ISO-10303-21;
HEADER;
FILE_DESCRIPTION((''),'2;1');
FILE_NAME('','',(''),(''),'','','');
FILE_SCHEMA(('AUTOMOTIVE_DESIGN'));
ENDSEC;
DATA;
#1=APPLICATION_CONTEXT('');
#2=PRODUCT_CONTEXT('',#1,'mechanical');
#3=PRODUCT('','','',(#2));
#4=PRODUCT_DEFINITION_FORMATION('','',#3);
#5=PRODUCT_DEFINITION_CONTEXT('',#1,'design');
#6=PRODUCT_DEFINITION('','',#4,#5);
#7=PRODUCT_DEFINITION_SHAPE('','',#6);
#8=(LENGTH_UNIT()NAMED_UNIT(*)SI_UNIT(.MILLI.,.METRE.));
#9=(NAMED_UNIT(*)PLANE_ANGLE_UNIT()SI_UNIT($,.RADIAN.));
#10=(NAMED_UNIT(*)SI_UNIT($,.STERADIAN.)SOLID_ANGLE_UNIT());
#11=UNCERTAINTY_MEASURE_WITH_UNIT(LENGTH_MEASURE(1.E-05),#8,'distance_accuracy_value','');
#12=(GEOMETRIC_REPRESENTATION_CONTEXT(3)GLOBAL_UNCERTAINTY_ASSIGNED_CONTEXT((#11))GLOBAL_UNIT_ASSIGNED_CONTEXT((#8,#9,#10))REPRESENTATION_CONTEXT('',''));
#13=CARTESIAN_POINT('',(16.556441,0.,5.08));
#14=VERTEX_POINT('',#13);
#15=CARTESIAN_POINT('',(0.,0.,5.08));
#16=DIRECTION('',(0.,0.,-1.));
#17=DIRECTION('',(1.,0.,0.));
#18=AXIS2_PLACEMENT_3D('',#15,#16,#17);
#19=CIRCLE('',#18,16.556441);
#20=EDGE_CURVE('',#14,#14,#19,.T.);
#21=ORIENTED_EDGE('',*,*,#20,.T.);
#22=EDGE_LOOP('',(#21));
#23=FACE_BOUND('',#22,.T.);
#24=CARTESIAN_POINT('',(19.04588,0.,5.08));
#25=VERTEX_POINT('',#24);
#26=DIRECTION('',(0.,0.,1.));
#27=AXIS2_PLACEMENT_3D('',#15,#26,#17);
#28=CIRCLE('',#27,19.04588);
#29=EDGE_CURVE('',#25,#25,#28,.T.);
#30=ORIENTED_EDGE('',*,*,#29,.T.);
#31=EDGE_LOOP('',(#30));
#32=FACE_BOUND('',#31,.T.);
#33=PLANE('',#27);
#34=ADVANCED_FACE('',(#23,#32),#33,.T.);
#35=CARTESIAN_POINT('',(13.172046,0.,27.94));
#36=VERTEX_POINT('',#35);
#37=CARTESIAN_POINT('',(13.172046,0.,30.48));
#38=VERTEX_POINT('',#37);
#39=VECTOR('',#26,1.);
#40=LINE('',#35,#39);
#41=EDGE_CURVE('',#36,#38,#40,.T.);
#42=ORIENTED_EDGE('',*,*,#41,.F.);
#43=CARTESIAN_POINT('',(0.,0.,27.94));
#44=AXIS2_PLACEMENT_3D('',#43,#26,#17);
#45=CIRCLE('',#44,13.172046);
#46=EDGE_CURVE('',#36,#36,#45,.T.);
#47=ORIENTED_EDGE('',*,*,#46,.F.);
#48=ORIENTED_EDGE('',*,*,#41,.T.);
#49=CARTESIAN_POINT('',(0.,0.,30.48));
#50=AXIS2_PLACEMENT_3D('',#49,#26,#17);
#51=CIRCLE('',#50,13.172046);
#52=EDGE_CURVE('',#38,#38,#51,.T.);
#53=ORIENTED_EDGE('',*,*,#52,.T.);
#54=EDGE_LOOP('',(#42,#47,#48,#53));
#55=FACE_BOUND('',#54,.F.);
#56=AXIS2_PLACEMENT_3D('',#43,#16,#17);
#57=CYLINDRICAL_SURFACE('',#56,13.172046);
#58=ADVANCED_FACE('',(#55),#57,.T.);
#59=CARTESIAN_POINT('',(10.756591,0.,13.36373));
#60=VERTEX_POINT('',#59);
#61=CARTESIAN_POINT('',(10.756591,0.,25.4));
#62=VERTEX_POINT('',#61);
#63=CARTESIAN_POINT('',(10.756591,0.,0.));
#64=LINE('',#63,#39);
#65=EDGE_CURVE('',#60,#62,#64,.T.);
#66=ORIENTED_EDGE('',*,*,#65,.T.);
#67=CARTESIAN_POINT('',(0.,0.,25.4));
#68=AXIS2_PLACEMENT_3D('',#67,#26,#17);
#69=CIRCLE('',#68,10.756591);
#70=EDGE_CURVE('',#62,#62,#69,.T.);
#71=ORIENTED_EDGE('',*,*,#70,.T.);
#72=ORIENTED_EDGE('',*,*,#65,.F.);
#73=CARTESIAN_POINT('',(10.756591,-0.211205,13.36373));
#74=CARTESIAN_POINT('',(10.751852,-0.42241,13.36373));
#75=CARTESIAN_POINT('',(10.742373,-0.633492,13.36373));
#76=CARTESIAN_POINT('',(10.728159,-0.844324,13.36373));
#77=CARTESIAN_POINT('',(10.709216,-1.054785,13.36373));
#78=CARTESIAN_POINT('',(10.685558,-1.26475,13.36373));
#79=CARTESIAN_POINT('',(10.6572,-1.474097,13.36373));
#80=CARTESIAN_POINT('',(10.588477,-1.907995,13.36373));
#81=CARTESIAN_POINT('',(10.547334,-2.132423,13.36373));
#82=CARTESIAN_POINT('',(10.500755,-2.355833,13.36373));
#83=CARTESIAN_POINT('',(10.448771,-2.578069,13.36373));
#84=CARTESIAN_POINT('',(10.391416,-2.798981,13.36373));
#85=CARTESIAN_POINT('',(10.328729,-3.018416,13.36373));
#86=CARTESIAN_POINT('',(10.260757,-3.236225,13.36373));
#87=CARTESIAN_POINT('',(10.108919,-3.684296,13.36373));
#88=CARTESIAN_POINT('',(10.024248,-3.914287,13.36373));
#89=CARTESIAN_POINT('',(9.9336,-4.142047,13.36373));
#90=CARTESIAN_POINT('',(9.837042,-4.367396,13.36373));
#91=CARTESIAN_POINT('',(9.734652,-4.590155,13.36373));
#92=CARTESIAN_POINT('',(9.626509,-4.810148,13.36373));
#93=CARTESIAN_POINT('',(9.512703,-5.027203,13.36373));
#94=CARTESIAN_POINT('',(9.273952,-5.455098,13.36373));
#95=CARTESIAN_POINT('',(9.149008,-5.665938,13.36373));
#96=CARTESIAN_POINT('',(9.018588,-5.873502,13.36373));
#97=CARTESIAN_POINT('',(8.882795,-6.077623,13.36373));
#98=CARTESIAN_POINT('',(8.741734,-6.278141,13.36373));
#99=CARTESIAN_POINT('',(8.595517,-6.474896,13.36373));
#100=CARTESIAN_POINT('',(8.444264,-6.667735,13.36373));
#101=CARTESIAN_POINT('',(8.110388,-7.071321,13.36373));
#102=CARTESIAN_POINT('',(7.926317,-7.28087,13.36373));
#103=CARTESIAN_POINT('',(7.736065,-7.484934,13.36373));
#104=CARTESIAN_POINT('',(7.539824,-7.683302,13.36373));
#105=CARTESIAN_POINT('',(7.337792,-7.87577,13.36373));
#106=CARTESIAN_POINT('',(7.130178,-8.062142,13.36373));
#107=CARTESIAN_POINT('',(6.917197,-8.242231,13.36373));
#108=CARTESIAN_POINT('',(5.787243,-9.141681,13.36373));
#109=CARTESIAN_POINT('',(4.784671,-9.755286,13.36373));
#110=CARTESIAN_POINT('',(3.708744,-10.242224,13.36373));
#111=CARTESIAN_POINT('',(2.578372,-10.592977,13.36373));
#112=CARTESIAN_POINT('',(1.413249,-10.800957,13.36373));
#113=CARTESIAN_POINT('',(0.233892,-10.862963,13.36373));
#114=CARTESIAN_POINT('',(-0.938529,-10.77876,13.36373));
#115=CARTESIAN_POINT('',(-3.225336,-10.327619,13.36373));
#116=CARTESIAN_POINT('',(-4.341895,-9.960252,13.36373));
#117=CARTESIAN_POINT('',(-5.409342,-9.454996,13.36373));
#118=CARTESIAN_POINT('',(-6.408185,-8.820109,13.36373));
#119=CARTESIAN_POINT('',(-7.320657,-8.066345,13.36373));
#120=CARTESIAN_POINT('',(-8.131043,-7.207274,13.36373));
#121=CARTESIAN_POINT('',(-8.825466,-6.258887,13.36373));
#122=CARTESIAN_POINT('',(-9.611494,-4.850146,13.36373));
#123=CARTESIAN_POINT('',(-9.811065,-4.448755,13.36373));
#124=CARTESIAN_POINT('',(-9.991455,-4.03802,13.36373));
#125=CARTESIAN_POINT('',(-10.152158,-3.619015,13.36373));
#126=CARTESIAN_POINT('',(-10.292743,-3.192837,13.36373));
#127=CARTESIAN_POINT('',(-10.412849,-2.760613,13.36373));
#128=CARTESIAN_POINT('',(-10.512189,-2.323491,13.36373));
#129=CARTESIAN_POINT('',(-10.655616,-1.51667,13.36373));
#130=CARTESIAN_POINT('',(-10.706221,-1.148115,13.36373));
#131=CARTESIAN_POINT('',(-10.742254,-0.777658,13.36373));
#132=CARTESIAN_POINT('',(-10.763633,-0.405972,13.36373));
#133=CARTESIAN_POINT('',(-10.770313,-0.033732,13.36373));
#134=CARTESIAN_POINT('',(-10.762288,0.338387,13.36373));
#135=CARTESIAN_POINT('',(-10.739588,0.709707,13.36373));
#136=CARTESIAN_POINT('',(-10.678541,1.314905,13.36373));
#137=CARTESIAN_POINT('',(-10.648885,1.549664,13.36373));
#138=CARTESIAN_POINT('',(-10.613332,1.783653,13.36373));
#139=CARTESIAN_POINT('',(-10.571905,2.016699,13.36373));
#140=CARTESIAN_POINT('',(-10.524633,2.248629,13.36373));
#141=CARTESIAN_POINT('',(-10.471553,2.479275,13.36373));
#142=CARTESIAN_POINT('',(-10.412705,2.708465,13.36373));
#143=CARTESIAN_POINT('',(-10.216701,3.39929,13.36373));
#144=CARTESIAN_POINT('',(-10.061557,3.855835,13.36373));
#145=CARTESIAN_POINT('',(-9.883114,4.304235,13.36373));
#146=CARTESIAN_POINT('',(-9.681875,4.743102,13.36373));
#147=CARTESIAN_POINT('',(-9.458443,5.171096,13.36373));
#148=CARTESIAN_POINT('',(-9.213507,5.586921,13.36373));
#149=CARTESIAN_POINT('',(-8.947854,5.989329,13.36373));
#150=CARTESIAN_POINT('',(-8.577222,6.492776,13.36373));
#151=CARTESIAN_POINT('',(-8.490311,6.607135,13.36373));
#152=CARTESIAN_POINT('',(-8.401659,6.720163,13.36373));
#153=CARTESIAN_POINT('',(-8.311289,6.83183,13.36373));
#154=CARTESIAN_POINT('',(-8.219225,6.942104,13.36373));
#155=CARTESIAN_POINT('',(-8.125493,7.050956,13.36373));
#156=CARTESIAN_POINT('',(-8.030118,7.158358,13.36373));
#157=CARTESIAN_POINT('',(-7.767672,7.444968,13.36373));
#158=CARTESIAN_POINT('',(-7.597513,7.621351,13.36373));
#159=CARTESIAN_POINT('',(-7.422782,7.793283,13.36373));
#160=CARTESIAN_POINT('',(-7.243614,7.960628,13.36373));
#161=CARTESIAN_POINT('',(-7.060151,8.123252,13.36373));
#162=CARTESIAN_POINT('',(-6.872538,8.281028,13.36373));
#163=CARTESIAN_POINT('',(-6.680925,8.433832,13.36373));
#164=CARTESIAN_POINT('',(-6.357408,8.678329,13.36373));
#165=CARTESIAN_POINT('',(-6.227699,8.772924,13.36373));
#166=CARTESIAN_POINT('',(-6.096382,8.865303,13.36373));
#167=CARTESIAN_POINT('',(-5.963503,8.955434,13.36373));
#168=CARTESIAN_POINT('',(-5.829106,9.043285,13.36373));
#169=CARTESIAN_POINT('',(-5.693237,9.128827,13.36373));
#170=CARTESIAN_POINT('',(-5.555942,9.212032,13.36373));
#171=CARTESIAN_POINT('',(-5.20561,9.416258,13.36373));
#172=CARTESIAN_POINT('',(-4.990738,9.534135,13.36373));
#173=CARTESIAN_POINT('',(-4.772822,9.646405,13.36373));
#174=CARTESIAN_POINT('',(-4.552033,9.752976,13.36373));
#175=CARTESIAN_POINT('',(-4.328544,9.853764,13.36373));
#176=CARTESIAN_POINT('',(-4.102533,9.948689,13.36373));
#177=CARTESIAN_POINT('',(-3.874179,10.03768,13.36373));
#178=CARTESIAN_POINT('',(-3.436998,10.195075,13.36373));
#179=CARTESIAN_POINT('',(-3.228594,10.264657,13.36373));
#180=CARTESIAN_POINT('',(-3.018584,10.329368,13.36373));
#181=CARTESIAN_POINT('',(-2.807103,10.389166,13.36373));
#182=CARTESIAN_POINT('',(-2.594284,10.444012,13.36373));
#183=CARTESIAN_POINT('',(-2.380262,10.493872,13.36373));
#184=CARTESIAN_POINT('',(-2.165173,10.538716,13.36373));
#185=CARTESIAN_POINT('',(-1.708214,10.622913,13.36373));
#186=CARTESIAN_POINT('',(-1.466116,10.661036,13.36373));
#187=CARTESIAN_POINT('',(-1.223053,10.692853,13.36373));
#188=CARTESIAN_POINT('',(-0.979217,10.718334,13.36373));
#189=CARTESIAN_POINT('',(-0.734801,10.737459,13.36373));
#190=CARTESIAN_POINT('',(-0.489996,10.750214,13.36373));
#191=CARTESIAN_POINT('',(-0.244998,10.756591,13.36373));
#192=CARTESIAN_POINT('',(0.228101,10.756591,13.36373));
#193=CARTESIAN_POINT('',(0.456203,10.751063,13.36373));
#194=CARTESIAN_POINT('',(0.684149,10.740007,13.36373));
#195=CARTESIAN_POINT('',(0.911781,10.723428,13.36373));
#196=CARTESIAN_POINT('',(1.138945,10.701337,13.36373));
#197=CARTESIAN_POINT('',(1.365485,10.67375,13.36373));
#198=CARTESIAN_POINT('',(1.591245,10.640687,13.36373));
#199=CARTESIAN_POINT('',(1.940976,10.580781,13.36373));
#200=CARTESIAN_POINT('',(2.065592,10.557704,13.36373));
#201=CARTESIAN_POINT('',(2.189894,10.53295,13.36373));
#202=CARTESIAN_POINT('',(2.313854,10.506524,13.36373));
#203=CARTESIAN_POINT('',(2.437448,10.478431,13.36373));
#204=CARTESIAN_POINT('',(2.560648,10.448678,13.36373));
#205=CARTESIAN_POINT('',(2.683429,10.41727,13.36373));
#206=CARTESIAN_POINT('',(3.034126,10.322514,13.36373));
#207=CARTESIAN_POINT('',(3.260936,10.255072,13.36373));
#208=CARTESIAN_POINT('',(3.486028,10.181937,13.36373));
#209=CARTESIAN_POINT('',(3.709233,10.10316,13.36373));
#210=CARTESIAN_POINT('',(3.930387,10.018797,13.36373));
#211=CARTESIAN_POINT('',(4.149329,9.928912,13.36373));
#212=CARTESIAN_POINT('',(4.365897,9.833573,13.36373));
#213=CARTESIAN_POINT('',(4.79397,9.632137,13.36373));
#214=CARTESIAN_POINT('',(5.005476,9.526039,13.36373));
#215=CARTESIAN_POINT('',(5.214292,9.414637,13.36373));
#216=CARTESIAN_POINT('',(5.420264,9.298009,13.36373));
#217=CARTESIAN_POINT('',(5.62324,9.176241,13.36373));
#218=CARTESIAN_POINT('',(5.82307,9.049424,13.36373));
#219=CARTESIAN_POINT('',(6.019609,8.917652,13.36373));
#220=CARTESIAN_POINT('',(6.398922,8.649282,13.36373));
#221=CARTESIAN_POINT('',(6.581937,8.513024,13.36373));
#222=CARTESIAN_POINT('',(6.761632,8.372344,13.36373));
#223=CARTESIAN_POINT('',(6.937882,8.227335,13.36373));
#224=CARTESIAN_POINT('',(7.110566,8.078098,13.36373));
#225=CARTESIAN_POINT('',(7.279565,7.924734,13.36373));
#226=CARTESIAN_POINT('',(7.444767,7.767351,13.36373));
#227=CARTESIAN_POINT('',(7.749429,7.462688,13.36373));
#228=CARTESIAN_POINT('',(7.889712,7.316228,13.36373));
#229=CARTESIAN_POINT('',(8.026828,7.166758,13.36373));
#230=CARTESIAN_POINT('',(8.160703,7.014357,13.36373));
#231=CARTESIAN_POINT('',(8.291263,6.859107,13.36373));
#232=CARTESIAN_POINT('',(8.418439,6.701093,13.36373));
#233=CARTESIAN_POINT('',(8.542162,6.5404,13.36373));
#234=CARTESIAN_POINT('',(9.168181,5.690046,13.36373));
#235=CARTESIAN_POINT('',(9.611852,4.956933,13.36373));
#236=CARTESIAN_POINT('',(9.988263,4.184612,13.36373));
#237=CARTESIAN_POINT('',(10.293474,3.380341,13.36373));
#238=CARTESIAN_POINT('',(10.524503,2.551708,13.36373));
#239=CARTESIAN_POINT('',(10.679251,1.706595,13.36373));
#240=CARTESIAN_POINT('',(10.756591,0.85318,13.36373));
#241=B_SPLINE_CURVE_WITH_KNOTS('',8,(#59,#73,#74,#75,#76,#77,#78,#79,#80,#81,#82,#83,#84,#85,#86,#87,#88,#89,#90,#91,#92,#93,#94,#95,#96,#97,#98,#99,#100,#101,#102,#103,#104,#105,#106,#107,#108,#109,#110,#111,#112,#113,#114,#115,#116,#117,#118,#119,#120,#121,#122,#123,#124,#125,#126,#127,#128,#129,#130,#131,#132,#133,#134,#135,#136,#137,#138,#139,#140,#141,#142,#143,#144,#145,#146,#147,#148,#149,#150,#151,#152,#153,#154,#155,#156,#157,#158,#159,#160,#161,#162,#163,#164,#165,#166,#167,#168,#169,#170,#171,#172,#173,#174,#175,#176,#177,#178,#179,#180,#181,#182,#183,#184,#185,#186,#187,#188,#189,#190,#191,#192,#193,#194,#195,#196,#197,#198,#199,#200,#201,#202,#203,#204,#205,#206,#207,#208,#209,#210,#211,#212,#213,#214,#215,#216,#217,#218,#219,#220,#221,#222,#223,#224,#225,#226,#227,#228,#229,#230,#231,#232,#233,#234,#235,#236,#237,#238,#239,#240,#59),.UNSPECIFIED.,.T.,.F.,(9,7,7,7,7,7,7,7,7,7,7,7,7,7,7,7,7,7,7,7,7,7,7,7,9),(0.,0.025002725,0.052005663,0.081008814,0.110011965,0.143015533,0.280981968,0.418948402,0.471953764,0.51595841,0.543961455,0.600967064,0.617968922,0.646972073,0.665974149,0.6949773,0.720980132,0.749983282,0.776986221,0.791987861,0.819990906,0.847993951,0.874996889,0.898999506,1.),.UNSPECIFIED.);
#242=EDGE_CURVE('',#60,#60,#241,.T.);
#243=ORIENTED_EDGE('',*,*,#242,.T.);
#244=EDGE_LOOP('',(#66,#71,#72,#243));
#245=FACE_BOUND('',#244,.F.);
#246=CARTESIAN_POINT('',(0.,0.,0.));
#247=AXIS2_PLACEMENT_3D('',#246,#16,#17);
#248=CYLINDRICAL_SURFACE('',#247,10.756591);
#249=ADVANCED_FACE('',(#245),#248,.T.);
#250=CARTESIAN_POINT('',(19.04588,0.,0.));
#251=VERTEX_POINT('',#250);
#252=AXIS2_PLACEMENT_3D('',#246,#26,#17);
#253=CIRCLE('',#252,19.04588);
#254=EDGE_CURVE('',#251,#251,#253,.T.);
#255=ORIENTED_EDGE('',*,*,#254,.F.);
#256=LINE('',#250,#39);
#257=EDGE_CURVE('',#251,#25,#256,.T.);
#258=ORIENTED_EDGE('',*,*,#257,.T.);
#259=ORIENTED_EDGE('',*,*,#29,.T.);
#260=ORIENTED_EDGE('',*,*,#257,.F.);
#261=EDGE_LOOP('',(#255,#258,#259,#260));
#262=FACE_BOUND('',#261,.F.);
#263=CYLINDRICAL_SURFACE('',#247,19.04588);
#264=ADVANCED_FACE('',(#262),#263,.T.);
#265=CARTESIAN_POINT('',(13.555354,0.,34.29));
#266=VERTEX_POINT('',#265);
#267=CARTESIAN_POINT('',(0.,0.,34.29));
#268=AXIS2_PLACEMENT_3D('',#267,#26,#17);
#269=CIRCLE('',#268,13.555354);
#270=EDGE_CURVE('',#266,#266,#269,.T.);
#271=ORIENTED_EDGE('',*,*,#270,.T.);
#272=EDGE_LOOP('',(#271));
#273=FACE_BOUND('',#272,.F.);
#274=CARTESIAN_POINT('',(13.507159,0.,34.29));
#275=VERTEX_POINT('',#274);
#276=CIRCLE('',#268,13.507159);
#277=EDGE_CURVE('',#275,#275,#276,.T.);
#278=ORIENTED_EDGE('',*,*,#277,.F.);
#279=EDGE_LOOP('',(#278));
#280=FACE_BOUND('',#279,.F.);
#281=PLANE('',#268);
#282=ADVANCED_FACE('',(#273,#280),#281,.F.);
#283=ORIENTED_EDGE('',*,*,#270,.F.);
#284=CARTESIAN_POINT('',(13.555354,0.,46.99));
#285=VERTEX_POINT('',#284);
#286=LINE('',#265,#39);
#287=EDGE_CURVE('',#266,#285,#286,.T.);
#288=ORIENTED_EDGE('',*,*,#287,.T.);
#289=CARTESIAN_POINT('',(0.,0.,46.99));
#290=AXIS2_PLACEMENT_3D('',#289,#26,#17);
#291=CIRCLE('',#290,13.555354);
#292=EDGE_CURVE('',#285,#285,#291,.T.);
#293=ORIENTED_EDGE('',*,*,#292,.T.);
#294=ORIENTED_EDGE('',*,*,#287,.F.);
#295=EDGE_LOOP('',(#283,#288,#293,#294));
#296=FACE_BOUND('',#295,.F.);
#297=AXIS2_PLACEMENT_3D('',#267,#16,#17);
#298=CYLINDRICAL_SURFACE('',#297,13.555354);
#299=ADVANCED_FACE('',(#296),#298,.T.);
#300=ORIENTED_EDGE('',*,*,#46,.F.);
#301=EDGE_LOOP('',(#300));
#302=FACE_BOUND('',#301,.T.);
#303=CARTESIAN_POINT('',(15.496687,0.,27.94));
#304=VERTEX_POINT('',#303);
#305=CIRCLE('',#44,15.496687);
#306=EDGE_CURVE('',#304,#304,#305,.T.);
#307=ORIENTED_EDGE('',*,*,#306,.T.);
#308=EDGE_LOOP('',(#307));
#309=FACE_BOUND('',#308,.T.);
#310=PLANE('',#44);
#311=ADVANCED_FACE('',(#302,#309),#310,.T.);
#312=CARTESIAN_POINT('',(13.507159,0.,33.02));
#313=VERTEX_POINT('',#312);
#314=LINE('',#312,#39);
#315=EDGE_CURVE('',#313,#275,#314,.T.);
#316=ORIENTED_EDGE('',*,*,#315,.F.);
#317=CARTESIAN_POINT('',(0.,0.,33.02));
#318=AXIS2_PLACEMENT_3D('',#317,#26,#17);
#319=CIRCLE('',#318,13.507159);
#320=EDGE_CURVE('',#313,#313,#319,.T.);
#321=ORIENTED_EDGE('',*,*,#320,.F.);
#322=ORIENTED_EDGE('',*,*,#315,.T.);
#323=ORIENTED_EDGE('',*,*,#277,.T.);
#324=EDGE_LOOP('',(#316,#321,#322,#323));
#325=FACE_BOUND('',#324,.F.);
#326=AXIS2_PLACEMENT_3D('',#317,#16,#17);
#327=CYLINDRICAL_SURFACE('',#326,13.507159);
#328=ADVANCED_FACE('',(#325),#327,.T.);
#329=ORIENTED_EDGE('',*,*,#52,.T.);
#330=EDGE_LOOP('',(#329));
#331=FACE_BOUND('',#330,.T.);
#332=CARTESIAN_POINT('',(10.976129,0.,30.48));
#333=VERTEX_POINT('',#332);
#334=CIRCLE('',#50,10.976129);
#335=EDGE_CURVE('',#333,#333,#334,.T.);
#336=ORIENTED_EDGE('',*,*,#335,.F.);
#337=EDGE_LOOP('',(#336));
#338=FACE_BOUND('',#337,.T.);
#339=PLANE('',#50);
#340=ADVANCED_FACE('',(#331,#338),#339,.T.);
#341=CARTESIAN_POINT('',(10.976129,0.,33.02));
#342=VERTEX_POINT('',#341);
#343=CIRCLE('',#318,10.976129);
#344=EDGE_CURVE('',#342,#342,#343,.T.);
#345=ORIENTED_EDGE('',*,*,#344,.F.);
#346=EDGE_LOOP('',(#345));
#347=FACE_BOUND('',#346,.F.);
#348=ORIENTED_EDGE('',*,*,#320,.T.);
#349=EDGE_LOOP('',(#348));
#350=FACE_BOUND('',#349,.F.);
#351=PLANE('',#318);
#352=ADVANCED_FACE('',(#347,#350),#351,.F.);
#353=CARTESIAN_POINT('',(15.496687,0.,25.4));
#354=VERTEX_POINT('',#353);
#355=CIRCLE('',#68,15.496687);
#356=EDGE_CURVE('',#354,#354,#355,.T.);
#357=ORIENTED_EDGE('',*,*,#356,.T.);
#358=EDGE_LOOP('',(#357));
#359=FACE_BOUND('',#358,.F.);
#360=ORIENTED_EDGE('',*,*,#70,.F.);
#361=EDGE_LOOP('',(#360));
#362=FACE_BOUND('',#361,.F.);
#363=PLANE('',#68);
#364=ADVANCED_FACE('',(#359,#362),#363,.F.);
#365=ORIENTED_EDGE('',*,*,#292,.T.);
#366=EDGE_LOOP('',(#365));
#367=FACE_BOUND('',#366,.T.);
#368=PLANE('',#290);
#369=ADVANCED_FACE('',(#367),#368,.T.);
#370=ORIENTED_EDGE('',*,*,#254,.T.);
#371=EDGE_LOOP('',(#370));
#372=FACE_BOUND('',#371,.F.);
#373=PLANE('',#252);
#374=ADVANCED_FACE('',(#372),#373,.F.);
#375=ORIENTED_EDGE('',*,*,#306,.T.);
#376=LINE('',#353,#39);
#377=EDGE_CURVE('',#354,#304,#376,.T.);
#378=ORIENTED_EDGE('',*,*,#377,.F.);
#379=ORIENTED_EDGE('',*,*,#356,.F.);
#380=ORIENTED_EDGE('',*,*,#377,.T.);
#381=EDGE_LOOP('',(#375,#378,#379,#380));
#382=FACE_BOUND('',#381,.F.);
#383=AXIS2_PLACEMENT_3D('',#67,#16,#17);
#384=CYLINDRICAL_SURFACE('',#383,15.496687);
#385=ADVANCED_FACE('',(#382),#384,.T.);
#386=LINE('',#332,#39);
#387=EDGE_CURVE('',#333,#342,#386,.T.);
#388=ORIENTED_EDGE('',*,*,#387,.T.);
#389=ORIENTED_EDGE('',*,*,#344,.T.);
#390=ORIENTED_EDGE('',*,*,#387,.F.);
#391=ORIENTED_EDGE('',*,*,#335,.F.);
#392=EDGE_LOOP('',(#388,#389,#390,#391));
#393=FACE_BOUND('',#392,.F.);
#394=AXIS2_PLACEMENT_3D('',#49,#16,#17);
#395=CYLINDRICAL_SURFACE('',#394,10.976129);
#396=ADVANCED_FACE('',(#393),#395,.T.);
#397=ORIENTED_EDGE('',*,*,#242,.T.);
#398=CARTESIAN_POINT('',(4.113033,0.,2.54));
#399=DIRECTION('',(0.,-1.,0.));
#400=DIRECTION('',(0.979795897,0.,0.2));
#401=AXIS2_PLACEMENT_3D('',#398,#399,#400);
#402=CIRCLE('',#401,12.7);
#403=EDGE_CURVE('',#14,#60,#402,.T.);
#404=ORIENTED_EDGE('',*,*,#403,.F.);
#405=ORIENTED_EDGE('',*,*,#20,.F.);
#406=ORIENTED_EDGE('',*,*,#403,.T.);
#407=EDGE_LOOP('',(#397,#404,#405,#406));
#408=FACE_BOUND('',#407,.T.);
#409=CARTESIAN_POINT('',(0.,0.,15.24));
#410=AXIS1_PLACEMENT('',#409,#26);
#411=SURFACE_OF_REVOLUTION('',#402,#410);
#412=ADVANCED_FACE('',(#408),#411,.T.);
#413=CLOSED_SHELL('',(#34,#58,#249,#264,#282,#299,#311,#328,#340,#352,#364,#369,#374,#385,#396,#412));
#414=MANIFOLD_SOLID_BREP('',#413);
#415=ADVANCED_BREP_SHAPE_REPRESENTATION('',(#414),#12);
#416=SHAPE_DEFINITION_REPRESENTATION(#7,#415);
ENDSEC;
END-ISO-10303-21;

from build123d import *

# Parameters (mm, degrees)
F0_R      = 19.0458801966
F2_DEPTH  = 5.08
F1_R      = 16.5564413769
F3_DEPTH  = 15.24
F5_R      = 10.7565912882
F6_DEPTH  = 25.4
F7_R      = 15.4966869389
F8_DEPTH  = 2.54
F9_R      = 13.1720463189
F10_DEPTH = 2.54
F11_R     = 10.9761291002
F12_DEPTH = 2.54
F13_R     = 13.5071591259
F14_DEPTH = 1.27
F15_R     = 13.5553537987
F16_DEPTH = 12.7


# Not quite as in the source:
# - a fillet or chamfer that OpenCascade refuses, or shapes differently, is made with other operations: its cross-section is extruded or revolved along the edge and cut away or added


with BuildPart() as f2:
    # F0 (on Top) → F2 (new body)
    with BuildSketch(Plane.XY):
        Circle(F0_R)
    extrude(amount=F2_DEPTH)

    # F1 (on Top) → F3 (join)
    with BuildSketch(Plane.XY):
        Circle(F1_R)
    extrude(amount=F3_DEPTH)

    # F4: fillet of radius 12.7 on 1 edges, made by hand

    # F4_s1 → F4_t2 (revolve, cut)
    with BuildSketch(Plane.XZ):
        with BuildLine():
            ThreePointArc((16.5564413769, 5.08), (12.1452187403, 12.3773776994), (4.1130334835, 15.24))
            Line((4.1130334835, 15.24), (16.5564413769, 15.24))
            Line((16.5564413769, 15.24), (16.5564413769, 5.08))
        make_face()
    revolve(axis=Axis((0, 0, 15.24), (0, 0, 1)), mode=Mode.SUBTRACT)

    # F5 (on Top) → F6 (join)
    with BuildSketch(Plane.XY):
        Circle(F5_R)
    extrude(amount=F6_DEPTH)

    # F7 (on face) → F8 (join)
    with BuildSketch(Plane.XY.offset(25.4)):
        Circle(F7_R)
    extrude(amount=F8_DEPTH)

    # F9 (on face) → F10 (join)
    with BuildSketch(Plane.XY.offset(27.94)):
        Circle(F9_R)
    extrude(amount=F10_DEPTH)

    # F11 (on face) → F12 (join)
    with BuildSketch(Plane.XY.offset(30.48)):
        Circle(F11_R)
    extrude(amount=F12_DEPTH)

    # F13 (on face) → F14 (join)
    with BuildSketch(Plane.XY.offset(33.02)):
        Circle(F13_R)
    extrude(amount=F14_DEPTH)

    # F15 (on face) → F16 (join)
    with BuildSketch(Plane.XY.offset(34.29)):
        Circle(F15_R)
    extrude(amount=F16_DEPTH)


solid = f2.part
